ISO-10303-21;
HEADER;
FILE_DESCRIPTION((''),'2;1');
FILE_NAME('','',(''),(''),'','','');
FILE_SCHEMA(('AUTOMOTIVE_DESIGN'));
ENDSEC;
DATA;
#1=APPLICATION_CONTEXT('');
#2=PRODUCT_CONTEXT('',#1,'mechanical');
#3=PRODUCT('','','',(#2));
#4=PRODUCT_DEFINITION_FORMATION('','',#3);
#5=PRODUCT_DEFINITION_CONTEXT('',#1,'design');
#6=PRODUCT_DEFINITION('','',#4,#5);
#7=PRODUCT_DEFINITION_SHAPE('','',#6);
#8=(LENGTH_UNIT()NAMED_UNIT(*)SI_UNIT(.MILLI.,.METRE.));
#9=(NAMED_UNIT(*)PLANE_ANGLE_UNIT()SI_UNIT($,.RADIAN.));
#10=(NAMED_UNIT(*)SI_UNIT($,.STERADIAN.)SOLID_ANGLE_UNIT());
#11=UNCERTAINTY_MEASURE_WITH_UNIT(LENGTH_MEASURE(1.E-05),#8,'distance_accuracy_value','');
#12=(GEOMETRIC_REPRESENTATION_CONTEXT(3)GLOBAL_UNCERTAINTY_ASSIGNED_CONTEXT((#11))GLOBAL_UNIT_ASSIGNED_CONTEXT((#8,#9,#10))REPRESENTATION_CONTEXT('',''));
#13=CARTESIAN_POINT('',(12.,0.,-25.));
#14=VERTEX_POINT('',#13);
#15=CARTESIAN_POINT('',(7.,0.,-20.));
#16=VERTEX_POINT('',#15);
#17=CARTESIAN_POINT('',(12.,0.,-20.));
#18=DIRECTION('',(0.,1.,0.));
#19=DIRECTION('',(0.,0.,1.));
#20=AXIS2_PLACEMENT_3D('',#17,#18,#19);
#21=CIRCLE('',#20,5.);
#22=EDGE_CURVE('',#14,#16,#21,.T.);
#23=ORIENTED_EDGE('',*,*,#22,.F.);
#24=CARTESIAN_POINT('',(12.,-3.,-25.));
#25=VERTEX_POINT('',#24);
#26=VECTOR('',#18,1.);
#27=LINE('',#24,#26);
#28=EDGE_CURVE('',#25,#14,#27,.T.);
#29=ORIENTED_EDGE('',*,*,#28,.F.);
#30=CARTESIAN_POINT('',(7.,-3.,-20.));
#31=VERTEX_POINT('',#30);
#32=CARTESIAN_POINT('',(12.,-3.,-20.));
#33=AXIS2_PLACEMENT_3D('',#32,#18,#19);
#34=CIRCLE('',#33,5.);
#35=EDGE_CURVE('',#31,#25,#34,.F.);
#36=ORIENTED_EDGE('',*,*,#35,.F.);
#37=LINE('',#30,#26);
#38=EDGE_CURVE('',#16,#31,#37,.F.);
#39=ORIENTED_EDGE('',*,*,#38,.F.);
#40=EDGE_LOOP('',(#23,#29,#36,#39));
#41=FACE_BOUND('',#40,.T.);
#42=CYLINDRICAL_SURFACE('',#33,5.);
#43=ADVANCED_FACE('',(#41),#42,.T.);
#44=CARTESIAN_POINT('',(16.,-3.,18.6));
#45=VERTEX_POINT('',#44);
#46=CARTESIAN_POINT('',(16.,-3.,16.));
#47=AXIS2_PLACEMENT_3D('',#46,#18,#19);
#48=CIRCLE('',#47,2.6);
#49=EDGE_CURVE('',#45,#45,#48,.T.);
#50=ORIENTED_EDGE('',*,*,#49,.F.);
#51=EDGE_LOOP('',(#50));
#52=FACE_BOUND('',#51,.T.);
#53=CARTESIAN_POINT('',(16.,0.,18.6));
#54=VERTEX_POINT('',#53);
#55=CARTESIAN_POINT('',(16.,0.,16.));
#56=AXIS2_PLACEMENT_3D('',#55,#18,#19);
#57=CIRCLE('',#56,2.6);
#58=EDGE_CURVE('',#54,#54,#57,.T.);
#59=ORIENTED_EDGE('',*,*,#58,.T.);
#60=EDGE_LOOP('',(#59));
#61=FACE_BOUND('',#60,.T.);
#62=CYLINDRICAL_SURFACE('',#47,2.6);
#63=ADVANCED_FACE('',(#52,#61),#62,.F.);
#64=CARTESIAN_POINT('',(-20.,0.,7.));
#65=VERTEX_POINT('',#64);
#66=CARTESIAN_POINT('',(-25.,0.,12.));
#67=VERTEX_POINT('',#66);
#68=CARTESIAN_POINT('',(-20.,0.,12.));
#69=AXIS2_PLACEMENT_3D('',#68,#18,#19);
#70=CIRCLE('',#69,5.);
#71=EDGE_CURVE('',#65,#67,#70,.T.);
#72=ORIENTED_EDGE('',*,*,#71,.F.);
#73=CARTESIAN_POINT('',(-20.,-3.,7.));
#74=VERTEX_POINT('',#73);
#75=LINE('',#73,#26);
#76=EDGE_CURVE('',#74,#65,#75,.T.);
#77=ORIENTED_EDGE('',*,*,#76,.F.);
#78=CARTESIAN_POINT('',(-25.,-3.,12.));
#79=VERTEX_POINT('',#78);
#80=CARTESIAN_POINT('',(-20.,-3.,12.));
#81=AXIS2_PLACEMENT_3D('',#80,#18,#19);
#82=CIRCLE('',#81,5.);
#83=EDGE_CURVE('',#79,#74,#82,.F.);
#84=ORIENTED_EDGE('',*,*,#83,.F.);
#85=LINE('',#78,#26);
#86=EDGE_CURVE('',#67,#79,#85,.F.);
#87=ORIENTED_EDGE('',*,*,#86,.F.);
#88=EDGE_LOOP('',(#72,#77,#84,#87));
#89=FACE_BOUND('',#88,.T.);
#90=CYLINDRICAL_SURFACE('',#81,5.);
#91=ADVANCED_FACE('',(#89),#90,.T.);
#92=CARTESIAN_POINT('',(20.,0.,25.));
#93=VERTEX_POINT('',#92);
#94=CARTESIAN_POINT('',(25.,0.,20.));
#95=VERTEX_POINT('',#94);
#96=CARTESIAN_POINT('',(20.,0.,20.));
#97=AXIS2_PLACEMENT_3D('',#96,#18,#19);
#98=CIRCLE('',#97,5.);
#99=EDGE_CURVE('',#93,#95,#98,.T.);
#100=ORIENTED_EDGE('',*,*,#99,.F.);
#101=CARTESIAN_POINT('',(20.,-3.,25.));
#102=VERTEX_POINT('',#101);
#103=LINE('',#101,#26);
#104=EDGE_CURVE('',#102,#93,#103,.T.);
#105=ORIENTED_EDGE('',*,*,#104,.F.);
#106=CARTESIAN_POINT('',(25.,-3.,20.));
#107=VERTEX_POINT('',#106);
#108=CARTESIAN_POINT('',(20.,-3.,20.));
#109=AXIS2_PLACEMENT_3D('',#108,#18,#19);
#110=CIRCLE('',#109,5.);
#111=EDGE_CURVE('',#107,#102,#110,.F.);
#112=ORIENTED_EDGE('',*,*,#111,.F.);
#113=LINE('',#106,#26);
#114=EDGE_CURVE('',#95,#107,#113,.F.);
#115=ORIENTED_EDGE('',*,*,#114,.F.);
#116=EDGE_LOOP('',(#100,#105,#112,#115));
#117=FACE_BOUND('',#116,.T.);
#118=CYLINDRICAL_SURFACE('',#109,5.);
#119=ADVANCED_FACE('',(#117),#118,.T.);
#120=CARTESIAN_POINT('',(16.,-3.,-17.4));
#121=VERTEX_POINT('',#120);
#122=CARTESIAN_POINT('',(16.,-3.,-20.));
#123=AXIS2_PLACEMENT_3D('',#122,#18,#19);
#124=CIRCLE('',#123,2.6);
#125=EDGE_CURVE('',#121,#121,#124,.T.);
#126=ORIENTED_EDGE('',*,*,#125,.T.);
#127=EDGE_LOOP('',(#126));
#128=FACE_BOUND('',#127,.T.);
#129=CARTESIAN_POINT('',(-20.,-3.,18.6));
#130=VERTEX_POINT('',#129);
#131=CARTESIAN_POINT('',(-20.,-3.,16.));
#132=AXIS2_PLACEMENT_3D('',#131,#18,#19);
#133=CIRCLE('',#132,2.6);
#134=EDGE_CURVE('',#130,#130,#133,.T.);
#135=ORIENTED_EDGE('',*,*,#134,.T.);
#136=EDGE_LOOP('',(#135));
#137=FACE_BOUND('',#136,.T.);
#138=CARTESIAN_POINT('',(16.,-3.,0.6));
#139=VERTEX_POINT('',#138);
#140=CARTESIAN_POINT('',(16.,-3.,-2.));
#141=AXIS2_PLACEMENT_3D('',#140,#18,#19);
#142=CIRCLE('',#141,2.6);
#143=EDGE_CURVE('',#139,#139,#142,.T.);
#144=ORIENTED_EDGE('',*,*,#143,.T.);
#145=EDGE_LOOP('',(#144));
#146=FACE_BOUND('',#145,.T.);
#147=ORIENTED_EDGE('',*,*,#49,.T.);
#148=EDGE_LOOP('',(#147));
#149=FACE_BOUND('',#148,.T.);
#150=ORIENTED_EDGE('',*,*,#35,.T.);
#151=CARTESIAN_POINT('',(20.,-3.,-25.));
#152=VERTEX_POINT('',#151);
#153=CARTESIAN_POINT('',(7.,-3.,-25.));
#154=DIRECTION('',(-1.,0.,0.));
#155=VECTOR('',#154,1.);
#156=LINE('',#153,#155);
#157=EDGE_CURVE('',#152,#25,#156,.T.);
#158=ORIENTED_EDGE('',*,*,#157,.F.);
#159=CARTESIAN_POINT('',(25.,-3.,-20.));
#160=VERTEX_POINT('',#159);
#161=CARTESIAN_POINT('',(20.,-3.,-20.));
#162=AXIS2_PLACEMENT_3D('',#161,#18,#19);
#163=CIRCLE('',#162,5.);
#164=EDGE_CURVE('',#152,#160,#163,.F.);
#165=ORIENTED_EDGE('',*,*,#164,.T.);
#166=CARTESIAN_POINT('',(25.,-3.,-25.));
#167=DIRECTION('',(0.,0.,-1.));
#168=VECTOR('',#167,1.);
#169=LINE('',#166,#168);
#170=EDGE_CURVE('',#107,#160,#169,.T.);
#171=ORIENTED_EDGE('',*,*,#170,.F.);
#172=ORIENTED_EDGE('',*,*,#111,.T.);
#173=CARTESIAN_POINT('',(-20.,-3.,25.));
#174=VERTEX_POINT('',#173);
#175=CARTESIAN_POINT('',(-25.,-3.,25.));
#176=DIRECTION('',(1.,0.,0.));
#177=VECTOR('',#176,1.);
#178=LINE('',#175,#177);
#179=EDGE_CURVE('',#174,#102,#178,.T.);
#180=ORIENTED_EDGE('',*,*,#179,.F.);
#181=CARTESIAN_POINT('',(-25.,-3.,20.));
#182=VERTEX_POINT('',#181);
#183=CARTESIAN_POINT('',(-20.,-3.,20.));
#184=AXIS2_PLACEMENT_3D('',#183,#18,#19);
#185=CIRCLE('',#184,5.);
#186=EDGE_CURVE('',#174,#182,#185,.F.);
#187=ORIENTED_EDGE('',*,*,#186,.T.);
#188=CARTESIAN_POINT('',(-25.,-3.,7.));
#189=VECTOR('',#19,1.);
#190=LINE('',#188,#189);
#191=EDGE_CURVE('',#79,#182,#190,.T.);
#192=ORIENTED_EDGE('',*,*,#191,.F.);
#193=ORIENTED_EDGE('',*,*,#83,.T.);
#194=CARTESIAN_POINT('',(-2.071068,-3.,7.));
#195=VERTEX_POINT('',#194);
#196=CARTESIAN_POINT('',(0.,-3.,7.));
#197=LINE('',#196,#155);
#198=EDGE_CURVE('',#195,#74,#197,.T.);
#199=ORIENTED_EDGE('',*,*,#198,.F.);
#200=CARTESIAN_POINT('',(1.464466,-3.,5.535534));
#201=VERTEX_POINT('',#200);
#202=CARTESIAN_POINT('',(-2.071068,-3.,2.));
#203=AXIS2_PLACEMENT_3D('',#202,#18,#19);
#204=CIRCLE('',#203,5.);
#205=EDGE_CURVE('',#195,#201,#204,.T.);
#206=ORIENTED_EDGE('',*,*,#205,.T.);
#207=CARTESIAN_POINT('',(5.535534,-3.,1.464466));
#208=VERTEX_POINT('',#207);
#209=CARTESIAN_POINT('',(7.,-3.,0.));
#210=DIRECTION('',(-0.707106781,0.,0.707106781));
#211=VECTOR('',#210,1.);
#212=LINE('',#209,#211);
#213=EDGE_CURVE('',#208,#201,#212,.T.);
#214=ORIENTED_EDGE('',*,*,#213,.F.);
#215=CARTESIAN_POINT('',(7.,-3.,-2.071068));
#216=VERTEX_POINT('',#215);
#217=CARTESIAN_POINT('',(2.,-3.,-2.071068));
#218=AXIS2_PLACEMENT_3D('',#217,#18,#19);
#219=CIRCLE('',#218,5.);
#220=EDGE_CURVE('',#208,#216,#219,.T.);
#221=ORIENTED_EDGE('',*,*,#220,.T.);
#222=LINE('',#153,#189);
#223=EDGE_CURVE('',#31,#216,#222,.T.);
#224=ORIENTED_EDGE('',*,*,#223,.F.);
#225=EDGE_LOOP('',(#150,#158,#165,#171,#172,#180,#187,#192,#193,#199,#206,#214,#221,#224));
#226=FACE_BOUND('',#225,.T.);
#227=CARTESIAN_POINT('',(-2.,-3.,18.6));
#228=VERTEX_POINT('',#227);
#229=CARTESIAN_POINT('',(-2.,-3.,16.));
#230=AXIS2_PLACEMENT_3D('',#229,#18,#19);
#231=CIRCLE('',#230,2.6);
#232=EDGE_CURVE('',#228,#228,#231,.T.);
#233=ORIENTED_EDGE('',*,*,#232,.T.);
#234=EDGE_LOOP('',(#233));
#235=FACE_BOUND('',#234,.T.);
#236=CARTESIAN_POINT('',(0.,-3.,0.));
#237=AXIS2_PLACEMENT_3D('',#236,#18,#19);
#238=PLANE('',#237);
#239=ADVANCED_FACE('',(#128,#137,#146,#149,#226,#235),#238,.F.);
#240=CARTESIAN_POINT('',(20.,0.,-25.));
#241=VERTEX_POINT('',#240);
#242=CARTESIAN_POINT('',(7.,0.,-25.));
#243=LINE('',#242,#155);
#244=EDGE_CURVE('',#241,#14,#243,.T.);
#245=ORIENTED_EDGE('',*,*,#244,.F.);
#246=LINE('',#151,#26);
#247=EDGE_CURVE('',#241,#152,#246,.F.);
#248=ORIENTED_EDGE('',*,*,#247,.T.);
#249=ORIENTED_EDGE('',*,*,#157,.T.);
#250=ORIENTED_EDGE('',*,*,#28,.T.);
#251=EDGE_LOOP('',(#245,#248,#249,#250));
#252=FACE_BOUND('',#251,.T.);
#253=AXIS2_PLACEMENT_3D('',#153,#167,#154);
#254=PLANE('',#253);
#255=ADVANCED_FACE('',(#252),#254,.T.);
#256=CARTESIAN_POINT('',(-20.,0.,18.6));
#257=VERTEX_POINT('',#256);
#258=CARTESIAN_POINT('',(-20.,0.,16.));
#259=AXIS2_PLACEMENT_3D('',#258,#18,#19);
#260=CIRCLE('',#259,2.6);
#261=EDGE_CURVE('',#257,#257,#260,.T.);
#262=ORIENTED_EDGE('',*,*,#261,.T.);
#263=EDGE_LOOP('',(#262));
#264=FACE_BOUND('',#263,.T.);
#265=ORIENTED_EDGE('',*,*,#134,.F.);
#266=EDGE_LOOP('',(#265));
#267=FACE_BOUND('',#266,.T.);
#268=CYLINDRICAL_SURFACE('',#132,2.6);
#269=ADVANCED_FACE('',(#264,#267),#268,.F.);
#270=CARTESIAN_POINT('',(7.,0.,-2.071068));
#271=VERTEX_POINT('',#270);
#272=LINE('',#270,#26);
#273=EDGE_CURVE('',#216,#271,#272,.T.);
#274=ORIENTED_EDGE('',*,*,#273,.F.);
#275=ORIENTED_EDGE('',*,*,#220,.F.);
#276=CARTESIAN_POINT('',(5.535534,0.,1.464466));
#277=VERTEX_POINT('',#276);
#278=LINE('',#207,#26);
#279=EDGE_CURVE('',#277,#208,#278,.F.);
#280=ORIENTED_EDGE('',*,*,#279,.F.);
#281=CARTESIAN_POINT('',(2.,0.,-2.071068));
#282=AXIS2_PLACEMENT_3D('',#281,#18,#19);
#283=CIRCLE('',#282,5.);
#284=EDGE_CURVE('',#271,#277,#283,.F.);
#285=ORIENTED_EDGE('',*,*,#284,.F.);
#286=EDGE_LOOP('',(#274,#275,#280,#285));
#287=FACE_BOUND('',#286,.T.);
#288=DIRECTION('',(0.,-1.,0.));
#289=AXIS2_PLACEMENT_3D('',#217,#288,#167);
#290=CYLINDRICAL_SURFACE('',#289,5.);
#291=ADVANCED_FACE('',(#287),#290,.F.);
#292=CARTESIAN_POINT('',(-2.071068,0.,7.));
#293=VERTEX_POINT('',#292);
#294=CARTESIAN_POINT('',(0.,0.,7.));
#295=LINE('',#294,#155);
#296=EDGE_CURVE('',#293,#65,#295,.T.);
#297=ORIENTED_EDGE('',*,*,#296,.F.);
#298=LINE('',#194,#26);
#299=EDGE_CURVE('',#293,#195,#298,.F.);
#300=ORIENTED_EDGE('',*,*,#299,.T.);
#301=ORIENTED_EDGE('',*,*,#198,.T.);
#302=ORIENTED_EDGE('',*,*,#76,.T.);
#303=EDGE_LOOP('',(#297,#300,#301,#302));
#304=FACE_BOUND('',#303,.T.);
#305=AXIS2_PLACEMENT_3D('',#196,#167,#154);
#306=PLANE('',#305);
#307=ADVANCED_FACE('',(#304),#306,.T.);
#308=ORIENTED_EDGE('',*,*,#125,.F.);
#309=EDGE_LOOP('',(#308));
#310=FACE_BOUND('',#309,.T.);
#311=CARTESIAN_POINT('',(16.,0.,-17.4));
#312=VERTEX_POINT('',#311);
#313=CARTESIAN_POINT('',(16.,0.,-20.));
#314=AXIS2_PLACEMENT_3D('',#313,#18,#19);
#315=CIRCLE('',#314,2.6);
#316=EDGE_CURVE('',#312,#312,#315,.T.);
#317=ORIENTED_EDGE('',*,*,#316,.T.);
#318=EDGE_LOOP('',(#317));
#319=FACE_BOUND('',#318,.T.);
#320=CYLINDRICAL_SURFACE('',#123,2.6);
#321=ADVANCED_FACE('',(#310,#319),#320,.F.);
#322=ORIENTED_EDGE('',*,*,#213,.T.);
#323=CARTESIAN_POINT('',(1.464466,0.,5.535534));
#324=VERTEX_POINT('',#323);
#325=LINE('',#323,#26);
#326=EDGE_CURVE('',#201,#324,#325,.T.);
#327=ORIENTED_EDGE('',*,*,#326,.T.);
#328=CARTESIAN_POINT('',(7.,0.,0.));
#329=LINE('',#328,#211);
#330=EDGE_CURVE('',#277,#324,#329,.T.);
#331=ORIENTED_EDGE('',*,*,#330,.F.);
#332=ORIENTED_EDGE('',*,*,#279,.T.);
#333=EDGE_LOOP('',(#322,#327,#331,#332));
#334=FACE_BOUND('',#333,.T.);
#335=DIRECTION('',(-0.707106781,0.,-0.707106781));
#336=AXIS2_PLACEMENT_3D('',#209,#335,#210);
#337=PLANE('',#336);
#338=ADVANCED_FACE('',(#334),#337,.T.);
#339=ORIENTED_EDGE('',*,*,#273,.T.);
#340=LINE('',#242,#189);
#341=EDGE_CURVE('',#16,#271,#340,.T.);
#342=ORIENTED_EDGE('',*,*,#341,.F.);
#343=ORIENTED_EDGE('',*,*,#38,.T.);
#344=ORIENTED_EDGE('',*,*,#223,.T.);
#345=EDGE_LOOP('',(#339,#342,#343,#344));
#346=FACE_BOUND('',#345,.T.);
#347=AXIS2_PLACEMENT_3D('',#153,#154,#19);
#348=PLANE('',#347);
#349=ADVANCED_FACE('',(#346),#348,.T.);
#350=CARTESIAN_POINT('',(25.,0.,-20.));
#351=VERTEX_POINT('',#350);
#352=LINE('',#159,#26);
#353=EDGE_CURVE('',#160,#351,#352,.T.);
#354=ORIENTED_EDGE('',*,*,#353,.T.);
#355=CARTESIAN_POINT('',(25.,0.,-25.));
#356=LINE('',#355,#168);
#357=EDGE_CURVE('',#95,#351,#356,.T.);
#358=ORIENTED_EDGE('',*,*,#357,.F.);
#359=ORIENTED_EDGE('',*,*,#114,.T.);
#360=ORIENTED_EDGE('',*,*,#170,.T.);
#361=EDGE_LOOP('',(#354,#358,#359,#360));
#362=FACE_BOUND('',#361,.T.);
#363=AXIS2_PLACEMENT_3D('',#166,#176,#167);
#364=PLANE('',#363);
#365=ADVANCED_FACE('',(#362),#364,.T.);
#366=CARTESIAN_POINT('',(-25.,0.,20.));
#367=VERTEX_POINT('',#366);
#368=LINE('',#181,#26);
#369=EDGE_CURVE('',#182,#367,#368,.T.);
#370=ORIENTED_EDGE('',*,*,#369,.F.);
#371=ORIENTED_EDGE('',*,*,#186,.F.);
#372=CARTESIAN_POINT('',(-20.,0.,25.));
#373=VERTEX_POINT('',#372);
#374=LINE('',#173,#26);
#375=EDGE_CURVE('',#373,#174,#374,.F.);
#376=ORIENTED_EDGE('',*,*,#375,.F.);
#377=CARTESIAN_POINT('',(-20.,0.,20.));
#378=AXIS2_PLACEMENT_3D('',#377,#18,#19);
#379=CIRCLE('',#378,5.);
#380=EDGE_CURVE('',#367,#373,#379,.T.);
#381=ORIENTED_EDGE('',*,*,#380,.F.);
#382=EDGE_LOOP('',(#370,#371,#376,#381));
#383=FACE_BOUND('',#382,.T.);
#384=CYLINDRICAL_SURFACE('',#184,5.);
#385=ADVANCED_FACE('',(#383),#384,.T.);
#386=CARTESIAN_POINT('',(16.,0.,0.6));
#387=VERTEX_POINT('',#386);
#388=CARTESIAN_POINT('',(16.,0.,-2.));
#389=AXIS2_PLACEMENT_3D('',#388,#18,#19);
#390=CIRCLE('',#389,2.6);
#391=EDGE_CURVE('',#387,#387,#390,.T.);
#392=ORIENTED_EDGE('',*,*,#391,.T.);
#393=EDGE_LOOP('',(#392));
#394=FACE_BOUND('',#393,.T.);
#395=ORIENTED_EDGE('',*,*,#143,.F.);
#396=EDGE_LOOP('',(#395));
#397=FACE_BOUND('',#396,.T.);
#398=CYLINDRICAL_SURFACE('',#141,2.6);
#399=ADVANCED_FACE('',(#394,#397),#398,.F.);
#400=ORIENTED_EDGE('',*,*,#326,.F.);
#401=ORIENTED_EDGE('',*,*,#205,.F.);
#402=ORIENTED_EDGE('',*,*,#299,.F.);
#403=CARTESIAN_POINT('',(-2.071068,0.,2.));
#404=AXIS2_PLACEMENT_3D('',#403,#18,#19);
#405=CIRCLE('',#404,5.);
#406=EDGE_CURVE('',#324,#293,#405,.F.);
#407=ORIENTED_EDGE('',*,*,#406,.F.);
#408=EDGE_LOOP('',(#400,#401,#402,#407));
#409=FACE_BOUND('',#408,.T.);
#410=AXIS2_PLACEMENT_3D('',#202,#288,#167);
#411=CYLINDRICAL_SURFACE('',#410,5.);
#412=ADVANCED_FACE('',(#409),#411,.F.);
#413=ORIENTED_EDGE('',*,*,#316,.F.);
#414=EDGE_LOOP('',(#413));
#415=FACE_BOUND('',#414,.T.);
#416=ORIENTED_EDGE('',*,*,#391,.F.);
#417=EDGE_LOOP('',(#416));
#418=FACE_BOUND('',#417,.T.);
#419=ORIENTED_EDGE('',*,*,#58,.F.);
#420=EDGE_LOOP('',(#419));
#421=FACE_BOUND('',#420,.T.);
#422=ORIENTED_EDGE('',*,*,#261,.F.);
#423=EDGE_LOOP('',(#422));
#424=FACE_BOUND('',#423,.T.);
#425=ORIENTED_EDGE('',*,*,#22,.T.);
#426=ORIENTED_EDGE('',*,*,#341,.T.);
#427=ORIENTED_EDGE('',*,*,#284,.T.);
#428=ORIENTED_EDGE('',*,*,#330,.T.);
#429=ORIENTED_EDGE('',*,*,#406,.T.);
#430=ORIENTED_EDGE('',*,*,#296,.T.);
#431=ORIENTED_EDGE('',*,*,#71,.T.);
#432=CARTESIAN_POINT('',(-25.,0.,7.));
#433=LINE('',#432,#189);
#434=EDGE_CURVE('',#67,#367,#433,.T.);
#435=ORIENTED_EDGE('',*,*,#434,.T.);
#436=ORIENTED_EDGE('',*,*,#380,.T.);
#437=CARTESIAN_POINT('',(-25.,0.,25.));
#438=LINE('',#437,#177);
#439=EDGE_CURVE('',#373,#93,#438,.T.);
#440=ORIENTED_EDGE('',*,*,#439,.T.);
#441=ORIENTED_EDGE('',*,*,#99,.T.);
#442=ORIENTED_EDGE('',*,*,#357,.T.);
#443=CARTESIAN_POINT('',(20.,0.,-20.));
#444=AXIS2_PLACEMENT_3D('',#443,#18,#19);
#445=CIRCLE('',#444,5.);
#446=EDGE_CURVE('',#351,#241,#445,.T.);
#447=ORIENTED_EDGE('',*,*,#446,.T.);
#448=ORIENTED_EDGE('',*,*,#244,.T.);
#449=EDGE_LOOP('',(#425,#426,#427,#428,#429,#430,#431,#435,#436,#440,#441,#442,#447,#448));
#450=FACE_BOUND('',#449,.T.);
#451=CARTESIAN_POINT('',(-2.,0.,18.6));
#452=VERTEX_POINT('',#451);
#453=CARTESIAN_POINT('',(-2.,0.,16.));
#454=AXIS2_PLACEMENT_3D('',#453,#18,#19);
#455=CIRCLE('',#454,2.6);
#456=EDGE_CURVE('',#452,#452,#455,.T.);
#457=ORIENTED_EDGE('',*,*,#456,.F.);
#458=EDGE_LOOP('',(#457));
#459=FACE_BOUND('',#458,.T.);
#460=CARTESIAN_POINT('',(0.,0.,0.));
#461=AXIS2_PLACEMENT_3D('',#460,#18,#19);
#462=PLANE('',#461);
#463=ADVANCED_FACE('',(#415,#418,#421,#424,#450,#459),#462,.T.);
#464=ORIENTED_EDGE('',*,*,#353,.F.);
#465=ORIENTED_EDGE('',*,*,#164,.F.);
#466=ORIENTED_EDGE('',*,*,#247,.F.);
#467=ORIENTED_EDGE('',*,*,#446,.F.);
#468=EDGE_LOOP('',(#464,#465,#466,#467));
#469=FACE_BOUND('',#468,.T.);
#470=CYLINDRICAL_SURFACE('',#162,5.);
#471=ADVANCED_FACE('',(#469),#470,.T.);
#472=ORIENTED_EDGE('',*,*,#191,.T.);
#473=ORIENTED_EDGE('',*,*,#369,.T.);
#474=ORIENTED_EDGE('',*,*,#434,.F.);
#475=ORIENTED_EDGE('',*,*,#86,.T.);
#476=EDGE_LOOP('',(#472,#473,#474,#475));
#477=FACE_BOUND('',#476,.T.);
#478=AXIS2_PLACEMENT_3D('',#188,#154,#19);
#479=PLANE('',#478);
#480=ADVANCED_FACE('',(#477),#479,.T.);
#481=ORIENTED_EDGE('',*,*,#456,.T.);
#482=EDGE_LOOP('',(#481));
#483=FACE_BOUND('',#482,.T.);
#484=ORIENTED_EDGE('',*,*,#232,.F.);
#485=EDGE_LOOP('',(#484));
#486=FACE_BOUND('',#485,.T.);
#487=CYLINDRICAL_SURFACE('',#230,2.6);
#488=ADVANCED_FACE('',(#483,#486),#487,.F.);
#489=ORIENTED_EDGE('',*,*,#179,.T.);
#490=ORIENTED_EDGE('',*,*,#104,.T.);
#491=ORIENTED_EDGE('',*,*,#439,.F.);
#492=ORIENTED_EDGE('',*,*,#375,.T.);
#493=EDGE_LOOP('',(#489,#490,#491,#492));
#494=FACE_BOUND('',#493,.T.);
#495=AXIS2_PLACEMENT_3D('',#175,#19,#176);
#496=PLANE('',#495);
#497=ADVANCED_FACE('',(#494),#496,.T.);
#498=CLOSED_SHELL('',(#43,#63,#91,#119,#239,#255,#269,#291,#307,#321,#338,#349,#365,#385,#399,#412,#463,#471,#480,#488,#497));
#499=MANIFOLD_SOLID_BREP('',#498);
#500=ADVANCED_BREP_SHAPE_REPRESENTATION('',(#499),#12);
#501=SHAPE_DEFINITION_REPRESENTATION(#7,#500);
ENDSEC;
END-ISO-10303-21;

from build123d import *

# Parameters (mm, degrees)
SKETCH1_R          = 2.6
BASE_FLANGE1_DEPTH = 3
FILLET1_R          = 5
FILLET2_R          = 5


# Sheet-metal steps are written as plain solids
with BuildPart() as part:
    # Sketch1 → Base-Flange1 (new body)
    with BuildSketch(Plane(origin=(0, 0, 0), x_dir=(1, 0, 0), z_dir=(0, 1, 0))):
        Polygon((7, 25), (25, 25), (25, -25), (-25, -25), (-25, -7), (0, -7), (7, 0), align=None)
        with Locations(Location((16, -16, 0), (0, 0, 270))):
            Circle(SKETCH1_R, mode=Mode.SUBTRACT)
        with Locations(Location((-2, -16, 0), (0, 0, 270))):
            Circle(SKETCH1_R, mode=Mode.SUBTRACT)
        with Locations(Location((-20, -16, 0), (0, 0, 270))):
            Circle(SKETCH1_R, mode=Mode.SUBTRACT)
        with Locations(Location((16, 2, 0), (0, 0, 270))):
            Circle(SKETCH1_R, mode=Mode.SUBTRACT)
        with Locations(Location((16, 20, 0), (0, 0, 270))):
            Circle(SKETCH1_R, mode=Mode.SUBTRACT)
    extrude(amount=-BASE_FLANGE1_DEPTH)

    # Fillet1
    fillet1_edges = [part.edges().sort_by_distance(p)[0] for p in [
        (0, -1.5, 7),
        (7, -1.5, 0),
    ]]
    fillet(fillet1_edges, radius=FILLET1_R)

    # Fillet2
    fillet2_edges = [part.edges().sort_by_distance(p)[0] for p in [
        (25, -1.5, 25),
        (-25, -1.5, 25),
        (-25, -1.5, 7),
        (7, -1.5, -25),
        (25, -1.5, -25),
    ]]
    fillet(fillet2_edges, radius=FILLET2_R)


solid = part.part
